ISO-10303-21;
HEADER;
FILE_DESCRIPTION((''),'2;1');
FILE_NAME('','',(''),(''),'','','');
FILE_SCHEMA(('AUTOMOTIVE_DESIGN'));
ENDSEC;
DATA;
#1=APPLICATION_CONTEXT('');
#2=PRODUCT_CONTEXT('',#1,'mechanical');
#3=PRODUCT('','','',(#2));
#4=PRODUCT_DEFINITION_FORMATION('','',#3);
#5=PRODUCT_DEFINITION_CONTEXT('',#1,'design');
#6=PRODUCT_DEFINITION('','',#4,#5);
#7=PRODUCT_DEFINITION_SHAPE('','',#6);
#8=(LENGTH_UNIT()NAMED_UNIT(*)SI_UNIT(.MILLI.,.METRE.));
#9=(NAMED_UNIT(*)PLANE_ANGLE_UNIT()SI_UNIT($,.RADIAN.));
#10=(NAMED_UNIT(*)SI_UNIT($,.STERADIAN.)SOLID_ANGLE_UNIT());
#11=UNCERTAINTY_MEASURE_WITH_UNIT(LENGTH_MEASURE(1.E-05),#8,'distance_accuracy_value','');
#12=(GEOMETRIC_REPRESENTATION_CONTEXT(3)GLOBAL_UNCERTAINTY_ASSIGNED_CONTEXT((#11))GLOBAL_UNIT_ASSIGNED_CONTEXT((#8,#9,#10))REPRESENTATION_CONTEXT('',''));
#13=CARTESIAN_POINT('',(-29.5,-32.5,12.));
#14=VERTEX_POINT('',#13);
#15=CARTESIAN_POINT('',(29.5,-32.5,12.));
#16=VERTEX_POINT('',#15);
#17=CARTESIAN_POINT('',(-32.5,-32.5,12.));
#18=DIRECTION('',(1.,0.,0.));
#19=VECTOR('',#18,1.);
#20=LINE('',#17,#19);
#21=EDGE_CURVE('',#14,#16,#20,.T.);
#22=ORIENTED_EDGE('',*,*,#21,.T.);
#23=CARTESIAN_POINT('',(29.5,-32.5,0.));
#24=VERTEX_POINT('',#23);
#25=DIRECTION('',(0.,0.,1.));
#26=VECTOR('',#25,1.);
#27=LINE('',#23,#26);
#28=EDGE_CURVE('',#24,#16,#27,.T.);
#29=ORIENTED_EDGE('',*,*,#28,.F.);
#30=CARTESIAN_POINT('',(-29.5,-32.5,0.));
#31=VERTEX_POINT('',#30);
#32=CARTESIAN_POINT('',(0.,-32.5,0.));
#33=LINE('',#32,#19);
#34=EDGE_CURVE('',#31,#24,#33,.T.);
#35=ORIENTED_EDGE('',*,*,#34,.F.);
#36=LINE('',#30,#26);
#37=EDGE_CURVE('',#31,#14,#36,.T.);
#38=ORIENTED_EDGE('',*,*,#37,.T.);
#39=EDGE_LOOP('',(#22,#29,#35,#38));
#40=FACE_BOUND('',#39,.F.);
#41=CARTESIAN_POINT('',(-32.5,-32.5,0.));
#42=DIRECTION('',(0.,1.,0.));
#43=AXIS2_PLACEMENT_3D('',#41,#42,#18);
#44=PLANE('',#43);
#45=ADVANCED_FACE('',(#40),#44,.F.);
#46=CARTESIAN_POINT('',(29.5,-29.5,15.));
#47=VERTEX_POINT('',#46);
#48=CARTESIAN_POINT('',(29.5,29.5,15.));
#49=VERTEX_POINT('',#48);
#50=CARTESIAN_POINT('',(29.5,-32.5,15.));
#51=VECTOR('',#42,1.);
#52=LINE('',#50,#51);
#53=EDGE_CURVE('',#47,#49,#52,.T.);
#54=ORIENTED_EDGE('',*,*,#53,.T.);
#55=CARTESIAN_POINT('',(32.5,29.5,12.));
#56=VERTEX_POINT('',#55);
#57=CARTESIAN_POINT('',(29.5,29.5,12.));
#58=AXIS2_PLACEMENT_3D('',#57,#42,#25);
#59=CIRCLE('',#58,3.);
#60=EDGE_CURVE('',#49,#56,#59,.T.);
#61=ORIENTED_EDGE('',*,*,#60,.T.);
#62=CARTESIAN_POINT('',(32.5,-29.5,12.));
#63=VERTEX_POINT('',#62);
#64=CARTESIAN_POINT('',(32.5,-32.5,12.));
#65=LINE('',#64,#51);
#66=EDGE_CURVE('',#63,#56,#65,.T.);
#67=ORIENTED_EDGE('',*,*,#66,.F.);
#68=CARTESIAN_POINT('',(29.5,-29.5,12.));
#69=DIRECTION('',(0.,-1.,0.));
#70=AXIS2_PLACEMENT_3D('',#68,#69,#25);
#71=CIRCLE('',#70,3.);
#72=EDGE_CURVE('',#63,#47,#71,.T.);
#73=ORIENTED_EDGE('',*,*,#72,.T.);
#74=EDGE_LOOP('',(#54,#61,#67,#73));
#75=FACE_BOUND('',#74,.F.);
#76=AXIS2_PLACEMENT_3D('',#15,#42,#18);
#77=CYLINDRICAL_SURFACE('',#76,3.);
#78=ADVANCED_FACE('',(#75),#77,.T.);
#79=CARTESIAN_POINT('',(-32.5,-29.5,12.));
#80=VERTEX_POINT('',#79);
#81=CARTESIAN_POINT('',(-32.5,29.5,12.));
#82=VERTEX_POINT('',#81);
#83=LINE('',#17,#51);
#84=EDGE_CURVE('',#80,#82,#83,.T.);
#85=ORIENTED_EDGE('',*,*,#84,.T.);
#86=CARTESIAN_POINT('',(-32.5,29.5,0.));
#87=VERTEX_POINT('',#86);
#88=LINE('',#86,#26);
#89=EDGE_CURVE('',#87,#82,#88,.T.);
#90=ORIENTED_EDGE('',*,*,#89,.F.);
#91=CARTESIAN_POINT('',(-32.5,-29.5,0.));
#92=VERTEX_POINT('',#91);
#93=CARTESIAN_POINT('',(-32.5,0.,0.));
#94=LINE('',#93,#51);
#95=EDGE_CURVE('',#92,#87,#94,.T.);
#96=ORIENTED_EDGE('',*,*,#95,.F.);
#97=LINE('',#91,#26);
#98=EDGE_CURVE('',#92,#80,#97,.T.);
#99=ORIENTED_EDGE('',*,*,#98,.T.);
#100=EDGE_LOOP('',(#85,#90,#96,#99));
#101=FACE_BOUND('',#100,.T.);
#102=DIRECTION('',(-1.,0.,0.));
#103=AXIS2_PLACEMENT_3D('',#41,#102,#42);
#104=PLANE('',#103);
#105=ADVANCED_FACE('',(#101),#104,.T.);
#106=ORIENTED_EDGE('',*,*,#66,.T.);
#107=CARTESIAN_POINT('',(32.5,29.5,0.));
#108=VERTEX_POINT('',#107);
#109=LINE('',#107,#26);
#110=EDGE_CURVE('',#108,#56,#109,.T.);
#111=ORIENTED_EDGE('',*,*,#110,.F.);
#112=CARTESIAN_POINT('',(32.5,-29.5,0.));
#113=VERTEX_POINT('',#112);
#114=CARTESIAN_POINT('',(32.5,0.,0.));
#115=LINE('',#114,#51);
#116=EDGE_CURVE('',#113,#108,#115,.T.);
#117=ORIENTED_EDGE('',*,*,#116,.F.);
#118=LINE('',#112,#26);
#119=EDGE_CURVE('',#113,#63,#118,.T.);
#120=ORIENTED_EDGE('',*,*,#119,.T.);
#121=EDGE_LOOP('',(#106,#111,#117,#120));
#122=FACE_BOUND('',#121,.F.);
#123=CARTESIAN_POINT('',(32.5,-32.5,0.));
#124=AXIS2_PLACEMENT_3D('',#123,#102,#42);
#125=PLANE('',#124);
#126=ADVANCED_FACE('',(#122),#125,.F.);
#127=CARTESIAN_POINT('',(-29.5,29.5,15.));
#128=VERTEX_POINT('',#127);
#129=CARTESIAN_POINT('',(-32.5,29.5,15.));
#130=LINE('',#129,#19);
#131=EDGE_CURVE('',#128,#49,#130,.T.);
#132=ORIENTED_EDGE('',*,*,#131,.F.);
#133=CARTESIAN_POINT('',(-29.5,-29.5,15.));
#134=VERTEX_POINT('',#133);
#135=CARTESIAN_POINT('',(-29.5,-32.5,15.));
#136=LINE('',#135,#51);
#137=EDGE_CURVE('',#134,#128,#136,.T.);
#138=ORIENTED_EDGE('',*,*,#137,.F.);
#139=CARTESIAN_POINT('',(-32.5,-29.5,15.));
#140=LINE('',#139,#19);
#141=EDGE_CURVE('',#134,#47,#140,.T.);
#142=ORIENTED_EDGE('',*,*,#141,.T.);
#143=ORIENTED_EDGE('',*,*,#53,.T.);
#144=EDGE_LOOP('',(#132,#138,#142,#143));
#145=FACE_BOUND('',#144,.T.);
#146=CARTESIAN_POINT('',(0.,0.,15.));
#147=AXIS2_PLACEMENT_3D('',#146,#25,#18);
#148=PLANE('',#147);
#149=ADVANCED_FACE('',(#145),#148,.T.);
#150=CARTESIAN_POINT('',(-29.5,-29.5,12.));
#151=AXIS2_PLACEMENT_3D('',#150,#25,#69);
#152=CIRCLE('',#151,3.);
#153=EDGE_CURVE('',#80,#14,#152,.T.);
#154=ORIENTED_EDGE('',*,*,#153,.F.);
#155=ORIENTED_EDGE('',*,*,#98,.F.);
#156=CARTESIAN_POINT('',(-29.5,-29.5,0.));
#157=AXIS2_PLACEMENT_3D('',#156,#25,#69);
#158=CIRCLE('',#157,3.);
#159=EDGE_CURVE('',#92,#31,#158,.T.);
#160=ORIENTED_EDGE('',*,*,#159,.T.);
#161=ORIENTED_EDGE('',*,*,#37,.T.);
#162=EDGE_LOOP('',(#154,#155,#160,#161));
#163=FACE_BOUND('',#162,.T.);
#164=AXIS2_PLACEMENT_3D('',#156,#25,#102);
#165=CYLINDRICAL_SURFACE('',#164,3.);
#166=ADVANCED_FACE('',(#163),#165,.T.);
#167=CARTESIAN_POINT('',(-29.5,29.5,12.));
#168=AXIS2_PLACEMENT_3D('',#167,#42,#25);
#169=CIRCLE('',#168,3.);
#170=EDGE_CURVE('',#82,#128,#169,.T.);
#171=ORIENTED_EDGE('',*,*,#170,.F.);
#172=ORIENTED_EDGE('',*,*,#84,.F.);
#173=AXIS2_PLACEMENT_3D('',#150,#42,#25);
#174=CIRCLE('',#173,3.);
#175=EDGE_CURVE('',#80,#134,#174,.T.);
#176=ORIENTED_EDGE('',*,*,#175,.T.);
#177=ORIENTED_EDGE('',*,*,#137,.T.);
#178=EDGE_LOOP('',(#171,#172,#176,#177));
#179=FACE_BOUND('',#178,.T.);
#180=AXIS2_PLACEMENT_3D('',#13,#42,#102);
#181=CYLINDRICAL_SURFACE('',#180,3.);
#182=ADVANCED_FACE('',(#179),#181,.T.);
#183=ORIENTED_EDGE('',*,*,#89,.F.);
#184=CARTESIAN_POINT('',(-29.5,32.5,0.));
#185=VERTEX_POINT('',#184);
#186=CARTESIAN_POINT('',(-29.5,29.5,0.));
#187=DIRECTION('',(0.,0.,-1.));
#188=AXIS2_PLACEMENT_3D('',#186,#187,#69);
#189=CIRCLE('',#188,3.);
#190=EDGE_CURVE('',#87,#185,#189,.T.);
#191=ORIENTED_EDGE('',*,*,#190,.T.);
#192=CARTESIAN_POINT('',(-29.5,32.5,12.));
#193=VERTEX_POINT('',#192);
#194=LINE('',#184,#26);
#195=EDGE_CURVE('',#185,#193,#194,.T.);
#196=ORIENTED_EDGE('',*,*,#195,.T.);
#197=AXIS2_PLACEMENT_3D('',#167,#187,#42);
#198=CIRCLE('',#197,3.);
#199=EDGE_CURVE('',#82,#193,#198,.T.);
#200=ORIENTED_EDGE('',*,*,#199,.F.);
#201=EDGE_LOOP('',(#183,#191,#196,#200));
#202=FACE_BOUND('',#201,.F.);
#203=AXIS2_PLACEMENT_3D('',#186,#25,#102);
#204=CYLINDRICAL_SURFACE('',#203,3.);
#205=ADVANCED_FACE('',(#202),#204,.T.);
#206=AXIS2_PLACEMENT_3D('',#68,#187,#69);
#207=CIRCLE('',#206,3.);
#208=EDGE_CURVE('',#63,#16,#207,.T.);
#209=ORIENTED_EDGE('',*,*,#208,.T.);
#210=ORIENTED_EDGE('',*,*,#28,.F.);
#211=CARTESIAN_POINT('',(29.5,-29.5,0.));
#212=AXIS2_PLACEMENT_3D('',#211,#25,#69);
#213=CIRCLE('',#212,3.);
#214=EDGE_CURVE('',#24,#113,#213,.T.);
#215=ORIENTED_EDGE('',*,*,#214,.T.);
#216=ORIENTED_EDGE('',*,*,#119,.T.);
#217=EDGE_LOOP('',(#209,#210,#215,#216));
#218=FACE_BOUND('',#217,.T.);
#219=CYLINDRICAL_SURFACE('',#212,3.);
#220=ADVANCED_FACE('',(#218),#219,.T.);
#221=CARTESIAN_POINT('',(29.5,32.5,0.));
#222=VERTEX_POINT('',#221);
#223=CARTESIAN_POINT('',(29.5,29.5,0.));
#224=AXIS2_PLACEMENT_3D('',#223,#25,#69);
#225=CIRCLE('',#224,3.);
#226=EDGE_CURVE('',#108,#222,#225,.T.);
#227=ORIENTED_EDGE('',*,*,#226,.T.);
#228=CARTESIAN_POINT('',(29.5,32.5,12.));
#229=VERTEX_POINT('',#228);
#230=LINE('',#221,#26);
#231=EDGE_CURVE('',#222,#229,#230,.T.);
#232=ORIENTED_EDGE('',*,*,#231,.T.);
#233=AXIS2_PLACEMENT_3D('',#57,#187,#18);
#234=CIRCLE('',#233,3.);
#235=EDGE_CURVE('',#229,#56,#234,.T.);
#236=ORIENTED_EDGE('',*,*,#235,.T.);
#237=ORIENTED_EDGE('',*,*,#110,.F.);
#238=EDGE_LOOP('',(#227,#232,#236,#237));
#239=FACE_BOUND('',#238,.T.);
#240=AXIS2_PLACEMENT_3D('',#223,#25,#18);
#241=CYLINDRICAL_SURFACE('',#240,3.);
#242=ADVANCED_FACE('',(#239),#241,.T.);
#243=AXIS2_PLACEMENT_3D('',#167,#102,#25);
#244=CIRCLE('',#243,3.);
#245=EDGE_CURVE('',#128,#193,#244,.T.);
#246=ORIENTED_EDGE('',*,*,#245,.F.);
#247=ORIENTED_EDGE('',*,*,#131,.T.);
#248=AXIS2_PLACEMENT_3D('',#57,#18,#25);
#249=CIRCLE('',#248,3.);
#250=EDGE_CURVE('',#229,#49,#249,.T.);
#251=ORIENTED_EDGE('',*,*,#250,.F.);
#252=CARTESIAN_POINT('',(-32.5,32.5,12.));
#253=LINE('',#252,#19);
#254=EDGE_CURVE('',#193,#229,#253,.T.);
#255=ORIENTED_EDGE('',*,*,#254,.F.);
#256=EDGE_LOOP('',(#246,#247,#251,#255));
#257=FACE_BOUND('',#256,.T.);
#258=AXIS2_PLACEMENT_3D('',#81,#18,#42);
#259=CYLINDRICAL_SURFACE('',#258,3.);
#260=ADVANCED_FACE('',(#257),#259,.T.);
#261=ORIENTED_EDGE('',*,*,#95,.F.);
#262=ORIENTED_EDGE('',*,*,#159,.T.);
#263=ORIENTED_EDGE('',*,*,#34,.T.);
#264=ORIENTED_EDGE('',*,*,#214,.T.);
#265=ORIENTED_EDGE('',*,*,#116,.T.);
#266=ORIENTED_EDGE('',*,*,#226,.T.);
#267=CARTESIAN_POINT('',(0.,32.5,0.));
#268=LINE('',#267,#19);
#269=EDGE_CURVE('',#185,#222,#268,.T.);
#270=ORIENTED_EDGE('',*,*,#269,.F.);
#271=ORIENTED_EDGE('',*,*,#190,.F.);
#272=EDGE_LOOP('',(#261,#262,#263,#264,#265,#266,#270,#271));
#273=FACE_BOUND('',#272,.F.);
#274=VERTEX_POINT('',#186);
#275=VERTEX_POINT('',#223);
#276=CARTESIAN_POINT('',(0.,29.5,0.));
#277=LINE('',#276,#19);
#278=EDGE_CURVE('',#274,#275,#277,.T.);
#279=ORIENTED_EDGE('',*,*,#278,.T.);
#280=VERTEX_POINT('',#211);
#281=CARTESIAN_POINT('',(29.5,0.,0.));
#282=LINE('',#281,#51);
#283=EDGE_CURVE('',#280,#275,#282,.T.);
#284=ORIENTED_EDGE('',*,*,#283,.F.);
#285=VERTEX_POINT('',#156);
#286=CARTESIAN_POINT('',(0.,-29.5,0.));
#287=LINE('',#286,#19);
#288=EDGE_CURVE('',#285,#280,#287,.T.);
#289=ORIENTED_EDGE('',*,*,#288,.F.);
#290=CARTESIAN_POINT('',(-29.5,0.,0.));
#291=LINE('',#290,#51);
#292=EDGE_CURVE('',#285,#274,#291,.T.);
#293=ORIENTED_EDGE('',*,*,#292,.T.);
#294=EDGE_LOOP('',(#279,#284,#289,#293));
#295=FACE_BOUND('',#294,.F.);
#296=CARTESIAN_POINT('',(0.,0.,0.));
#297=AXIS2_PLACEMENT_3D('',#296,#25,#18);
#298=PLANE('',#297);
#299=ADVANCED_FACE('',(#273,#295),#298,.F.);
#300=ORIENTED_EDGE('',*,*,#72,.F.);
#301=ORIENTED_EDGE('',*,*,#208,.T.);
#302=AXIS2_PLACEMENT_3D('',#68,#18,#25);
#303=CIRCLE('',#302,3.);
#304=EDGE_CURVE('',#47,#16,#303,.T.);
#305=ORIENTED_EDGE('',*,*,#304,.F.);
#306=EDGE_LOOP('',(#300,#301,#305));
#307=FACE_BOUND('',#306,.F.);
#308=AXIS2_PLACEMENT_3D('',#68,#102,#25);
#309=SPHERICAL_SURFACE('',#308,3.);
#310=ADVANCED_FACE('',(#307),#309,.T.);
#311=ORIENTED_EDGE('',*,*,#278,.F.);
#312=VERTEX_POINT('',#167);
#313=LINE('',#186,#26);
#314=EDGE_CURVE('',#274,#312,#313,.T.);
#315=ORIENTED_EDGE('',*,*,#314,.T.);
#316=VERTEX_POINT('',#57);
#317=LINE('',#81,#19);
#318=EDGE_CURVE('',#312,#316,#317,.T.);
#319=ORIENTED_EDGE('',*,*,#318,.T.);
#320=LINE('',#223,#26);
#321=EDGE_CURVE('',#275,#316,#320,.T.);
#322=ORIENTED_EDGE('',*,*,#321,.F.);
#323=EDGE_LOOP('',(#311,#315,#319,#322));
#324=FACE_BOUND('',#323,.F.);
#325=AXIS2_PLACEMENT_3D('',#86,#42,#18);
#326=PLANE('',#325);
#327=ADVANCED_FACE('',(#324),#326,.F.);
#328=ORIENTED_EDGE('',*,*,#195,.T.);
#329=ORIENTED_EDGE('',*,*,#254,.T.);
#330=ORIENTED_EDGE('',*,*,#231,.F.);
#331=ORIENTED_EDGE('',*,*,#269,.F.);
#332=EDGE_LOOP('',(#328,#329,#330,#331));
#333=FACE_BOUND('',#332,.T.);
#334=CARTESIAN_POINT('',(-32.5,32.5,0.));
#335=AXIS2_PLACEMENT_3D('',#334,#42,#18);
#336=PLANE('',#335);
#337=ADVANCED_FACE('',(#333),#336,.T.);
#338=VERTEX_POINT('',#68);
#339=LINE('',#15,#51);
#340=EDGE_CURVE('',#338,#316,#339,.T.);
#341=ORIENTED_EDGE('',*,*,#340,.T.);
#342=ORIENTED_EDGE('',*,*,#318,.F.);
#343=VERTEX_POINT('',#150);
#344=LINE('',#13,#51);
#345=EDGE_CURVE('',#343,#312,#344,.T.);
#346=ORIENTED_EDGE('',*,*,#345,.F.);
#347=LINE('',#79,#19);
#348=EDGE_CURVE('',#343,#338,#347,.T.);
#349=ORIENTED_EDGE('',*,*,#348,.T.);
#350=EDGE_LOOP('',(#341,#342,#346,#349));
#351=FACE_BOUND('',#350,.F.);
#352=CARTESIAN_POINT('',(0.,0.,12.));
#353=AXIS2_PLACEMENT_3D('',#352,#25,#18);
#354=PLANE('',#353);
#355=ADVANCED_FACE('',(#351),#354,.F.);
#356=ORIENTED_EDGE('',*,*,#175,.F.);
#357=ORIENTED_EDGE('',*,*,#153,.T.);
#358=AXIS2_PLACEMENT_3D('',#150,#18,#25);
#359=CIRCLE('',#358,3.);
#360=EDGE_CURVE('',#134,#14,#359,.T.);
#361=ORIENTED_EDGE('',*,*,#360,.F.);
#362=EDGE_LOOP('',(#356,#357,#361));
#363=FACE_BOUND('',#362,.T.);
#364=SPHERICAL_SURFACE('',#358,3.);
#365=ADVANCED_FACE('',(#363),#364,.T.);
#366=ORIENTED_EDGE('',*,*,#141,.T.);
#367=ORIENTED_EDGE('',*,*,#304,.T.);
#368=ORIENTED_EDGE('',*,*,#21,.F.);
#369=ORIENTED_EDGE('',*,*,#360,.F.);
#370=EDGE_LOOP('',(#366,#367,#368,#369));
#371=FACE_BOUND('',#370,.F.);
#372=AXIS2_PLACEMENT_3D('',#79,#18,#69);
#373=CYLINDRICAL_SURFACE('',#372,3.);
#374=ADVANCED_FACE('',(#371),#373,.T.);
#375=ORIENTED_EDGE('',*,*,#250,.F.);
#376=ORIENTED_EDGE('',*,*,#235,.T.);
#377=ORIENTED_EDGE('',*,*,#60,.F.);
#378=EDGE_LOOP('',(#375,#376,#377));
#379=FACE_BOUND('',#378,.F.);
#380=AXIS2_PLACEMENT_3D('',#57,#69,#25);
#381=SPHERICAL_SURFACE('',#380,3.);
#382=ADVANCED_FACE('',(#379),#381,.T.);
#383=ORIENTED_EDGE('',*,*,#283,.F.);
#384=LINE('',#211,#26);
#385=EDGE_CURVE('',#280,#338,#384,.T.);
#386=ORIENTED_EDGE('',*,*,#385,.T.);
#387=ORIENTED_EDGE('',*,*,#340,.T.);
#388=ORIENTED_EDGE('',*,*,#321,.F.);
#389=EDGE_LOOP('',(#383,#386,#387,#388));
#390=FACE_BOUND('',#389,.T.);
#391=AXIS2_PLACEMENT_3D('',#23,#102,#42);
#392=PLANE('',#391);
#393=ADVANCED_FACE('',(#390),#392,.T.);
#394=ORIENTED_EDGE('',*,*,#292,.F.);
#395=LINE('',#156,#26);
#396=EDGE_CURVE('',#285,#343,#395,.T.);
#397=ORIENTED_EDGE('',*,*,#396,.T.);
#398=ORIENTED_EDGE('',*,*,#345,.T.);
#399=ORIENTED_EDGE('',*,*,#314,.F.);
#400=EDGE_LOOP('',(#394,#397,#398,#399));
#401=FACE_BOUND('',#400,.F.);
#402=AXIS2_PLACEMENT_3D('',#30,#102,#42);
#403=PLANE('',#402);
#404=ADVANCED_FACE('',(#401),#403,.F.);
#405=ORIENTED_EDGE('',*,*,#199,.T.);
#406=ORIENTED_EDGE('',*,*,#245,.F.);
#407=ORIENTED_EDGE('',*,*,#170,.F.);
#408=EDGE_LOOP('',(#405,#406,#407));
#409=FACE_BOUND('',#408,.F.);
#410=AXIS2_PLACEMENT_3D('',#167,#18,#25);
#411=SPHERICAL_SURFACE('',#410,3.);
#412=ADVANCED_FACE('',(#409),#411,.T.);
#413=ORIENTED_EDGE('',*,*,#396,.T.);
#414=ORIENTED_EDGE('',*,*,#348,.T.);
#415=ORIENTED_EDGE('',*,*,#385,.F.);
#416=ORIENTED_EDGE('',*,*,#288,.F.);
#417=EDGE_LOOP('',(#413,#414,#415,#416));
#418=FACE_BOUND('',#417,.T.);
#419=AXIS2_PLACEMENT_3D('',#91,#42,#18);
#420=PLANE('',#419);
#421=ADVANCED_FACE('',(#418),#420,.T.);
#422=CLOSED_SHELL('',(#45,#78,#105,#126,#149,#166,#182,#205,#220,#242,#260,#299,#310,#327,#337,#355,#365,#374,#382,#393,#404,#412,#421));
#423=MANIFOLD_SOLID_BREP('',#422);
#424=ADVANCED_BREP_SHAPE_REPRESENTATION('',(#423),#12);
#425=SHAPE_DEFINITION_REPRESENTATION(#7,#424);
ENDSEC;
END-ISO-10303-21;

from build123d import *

# Parameters (mm, degrees)
F0_W     = 65
F0_H     = 65
F1_DEPTH = 15
F2_R     = 3
F3_T     = 3


# Not quite as in the source:
# - a shell that OpenCascade refuses in one call is made with other operations: the cavity is built on its own and cut out


with BuildPart() as f1:
    # F0 (on Top) → F1 (new body)
    with BuildSketch(Plane.XY):
        Rectangle(F0_W, F0_H)
    extrude(amount=F1_DEPTH)

    # F2
    f2_edges = [f1.edges().sort_by_distance(p)[0] for p in [
        (0, -32.5, 15),
        (32.5, 0, 15),
        (0, 32.5, 15),
        (-32.5, 0, 15),
        (-32.5, 32.5, 7.5),
        (-32.5, -32.5, 7.5),
        (32.5, 32.5, 7.5),
        (32.5, -32.5, 7.5),
    ]]
    fillet(f2_edges, radius=F2_R)

    # F3: shell of thickness 3, made by hand


with BuildPart() as f3_core1:
    # F3_t2: copy of F1
    add(f1.part)

    # the walls: a layer under each face that stays
    f3_faces = [f3_core1.faces().sort_by_distance(p)[0] for p in [
        (0, -32.5, 6),
        (-32.5, 0, 6),
        (32.5, 0, 6),
        (0, 32.5, 6),
        (0, 0, 15),
    ]]
    thicken(f3_faces, amount=-F3_T, mode=Mode.SUBTRACT)


with BuildPart() as f1_1:
    add(f1.part)

    # what is left inside the walls is the cavity
    f3_cavity = [f3_core1.part.solids().sort_by_distance(p)[0] for p in [
        (0, -9.833333, 0.03),
    ]]
    add(f3_cavity, mode=Mode.SUBTRACT)


solid = f1_1.part
